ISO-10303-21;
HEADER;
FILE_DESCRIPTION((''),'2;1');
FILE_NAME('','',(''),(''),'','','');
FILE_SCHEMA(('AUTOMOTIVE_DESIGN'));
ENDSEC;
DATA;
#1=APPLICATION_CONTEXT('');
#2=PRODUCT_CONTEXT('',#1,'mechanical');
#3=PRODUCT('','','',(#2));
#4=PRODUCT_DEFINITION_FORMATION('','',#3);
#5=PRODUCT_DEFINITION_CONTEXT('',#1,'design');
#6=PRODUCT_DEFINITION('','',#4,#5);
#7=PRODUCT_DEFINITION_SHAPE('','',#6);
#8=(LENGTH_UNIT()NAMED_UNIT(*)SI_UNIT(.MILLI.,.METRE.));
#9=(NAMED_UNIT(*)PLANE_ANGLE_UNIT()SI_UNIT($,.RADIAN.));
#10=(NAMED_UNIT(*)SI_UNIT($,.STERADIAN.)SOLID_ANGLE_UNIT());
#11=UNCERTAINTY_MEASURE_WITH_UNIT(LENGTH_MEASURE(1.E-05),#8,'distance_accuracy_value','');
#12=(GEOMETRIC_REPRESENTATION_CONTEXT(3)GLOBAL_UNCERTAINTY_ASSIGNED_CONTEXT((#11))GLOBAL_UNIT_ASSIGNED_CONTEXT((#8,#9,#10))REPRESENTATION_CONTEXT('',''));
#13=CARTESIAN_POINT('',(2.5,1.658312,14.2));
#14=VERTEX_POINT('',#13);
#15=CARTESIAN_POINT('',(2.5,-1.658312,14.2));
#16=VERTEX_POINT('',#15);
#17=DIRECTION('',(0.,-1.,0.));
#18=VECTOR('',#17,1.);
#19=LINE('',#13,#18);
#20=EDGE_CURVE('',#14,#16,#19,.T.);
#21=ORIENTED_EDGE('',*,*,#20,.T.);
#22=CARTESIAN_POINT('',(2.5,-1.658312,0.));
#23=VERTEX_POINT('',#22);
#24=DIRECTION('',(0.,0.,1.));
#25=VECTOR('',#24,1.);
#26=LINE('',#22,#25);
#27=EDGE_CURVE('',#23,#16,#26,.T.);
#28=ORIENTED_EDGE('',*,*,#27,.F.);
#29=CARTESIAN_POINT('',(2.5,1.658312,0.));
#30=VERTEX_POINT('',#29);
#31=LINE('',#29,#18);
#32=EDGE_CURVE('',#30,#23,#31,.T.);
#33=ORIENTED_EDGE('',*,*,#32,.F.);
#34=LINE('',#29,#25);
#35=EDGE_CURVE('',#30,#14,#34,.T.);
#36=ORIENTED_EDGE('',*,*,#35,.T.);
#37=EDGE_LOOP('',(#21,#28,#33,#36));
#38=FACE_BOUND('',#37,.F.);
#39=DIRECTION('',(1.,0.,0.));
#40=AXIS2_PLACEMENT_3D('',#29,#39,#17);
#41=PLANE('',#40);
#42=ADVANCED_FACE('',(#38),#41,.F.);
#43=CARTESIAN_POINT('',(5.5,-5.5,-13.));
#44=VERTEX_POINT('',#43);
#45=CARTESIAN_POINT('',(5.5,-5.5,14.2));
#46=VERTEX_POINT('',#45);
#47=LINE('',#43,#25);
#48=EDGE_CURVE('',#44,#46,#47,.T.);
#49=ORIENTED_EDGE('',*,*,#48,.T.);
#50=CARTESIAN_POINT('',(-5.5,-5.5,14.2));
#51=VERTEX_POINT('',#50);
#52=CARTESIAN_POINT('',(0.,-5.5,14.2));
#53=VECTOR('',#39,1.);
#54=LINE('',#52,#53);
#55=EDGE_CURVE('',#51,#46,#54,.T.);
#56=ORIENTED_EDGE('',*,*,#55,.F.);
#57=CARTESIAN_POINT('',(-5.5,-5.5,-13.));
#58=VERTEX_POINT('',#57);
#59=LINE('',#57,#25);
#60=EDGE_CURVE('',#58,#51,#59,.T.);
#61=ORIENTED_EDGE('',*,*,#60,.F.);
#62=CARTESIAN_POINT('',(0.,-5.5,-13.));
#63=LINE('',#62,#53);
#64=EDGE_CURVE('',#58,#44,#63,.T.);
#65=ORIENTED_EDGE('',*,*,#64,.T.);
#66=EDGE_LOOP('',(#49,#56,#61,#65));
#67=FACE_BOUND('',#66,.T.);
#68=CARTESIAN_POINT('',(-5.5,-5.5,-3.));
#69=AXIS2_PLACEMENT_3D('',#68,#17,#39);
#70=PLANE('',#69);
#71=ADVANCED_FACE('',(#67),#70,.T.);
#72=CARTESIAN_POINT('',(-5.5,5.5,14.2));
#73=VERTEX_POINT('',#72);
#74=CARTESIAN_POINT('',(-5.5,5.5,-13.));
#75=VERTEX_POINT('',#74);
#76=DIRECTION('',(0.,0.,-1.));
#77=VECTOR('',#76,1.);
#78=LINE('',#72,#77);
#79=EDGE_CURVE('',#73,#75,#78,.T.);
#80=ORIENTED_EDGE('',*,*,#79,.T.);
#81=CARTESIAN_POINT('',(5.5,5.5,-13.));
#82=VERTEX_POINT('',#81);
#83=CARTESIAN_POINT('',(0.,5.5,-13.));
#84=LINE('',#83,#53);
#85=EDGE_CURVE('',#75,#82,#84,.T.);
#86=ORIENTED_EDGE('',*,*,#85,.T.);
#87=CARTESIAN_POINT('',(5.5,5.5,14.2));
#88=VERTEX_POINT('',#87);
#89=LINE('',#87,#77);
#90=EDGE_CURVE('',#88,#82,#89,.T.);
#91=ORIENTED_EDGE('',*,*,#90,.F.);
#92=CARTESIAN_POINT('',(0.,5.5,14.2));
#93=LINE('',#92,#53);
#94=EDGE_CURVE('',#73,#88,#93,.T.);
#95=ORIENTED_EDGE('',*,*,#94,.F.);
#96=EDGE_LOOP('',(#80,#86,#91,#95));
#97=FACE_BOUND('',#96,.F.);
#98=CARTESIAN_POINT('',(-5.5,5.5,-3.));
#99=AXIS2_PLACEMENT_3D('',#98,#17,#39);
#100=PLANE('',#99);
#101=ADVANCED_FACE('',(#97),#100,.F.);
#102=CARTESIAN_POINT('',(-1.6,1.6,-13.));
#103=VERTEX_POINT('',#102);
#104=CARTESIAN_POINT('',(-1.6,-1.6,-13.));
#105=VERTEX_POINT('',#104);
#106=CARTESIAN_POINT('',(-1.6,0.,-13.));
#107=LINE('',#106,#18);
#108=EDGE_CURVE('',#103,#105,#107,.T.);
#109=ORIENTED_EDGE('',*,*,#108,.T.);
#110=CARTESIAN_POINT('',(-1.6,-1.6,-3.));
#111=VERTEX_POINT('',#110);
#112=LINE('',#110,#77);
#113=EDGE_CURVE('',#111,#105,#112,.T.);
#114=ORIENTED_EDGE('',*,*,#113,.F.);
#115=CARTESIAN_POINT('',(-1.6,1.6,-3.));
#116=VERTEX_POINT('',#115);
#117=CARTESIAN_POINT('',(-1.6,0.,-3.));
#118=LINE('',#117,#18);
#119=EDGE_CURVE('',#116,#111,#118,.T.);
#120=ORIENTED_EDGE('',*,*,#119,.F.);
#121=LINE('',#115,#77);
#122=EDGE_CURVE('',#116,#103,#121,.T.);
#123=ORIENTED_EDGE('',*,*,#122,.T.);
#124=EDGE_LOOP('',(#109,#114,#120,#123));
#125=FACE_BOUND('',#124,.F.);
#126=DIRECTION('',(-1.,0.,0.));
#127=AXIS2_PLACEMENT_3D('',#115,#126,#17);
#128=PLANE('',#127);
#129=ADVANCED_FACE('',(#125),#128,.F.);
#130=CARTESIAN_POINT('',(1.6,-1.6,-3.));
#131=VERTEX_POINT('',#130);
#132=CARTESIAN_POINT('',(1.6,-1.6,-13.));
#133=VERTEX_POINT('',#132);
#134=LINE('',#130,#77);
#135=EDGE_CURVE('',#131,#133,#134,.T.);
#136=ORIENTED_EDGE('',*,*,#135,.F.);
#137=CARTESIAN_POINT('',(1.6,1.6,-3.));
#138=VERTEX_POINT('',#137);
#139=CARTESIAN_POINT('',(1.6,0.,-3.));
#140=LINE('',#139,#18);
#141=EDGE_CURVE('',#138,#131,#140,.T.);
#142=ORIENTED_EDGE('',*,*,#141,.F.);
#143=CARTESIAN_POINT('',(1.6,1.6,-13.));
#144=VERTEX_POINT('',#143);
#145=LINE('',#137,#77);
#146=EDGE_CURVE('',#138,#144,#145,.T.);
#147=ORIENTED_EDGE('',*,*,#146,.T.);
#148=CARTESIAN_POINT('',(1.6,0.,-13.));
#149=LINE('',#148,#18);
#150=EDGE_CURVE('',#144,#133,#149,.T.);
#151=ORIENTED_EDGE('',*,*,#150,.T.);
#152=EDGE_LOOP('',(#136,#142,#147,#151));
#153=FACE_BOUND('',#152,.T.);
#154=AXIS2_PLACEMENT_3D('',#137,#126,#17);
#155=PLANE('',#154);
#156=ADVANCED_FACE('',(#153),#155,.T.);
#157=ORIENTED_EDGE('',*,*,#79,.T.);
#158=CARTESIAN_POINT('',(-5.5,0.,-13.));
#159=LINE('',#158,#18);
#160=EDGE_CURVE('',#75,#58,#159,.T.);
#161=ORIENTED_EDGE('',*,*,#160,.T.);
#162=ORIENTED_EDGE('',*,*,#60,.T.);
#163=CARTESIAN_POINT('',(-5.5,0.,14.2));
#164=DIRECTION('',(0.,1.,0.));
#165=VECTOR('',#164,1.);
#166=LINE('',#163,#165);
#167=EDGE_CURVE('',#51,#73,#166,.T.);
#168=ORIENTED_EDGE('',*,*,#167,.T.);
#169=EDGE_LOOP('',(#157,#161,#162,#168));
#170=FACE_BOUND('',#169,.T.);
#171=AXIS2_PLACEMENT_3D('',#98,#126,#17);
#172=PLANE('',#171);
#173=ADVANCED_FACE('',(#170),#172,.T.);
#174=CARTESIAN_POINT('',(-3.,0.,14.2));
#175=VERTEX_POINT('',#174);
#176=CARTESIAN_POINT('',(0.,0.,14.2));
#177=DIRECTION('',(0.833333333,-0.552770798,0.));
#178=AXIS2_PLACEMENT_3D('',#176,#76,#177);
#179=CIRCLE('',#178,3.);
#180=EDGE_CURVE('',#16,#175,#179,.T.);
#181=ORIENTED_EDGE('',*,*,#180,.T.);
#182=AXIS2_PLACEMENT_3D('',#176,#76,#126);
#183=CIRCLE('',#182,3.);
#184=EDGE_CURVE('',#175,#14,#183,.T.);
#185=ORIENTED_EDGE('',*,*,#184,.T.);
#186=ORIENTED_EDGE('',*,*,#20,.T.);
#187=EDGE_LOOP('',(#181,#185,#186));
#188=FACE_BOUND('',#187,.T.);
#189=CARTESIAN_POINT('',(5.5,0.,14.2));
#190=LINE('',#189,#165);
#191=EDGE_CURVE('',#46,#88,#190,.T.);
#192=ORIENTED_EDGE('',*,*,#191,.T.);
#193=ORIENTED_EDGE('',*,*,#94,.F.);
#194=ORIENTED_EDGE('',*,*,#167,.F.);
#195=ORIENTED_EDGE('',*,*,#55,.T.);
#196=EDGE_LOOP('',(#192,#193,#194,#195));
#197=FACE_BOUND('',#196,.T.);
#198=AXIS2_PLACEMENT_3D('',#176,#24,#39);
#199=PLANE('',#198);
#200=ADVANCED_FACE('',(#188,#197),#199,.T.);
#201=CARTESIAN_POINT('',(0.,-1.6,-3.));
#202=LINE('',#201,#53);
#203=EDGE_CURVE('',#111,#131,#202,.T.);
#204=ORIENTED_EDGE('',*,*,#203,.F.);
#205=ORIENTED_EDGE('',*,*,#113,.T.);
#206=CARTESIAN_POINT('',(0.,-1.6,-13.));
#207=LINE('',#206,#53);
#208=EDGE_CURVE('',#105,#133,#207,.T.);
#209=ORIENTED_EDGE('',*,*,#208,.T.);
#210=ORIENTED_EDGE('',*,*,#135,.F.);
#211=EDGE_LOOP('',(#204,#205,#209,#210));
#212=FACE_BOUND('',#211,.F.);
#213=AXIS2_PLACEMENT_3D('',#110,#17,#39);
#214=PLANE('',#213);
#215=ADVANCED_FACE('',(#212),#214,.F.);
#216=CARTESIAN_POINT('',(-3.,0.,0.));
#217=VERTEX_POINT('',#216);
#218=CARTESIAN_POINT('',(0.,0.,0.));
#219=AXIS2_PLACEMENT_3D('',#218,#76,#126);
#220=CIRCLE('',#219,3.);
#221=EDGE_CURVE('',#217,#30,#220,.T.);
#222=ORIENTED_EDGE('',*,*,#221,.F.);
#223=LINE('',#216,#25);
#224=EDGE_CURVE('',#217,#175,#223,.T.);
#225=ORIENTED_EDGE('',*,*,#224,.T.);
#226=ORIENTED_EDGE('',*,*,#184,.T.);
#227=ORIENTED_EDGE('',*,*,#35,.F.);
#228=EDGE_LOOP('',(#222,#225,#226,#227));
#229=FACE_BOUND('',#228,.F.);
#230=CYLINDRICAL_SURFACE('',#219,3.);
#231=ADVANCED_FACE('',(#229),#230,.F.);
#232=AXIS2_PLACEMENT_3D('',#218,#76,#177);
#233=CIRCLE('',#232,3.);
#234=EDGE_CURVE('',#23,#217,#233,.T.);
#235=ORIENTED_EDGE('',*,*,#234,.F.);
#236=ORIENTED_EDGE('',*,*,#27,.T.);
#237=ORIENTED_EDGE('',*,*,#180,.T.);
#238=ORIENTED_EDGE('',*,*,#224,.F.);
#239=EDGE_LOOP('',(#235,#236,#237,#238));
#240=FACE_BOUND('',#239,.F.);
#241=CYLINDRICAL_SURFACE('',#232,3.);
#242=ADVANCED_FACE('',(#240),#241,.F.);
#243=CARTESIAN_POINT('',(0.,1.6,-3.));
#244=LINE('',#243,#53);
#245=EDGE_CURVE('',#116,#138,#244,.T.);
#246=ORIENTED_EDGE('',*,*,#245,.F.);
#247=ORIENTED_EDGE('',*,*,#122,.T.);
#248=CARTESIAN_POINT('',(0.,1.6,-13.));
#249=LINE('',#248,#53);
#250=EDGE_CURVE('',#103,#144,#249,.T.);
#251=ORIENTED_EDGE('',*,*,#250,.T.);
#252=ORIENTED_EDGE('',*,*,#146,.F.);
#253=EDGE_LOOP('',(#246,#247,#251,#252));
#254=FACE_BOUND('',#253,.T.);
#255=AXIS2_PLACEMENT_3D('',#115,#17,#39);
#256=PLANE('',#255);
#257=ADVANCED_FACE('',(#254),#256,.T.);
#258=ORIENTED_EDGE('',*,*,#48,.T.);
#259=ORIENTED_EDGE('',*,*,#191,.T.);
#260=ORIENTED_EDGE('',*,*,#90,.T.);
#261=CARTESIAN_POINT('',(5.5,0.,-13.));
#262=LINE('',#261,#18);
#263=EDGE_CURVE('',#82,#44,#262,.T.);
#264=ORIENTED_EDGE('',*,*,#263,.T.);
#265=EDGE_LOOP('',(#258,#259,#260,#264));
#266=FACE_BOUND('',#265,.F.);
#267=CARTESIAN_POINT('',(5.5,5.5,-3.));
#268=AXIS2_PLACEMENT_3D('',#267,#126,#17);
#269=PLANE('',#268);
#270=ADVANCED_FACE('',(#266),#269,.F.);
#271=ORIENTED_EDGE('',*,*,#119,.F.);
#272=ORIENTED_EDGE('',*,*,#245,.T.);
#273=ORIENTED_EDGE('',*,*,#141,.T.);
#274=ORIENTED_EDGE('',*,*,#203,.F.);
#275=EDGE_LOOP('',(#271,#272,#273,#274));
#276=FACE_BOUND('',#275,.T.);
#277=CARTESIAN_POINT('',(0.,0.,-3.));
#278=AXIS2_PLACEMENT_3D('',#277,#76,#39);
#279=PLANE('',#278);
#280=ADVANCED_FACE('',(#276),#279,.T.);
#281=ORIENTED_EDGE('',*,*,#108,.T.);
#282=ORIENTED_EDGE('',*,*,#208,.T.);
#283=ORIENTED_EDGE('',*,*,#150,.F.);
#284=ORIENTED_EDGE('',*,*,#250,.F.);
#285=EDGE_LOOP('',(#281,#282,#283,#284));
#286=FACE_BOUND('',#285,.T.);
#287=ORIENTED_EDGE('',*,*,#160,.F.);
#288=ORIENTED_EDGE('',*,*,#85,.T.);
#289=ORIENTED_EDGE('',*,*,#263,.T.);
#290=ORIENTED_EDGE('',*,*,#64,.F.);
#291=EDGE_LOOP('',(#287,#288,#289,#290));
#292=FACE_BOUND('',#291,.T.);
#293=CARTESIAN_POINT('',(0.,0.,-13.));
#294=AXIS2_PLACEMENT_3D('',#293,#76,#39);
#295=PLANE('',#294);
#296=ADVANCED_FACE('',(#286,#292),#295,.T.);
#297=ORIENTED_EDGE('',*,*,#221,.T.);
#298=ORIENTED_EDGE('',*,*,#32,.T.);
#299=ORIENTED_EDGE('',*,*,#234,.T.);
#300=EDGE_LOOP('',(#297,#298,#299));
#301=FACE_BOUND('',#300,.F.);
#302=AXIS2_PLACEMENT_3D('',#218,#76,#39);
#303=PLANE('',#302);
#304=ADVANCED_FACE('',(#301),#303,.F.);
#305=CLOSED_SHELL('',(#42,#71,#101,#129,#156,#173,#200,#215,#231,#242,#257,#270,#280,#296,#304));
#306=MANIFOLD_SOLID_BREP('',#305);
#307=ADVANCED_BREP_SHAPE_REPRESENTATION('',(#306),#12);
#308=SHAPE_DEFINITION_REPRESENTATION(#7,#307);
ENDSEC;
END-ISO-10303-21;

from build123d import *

# Parameters (mm, degrees)
F0_W     = 11
F0_H     = 11
F1_DEPTH = 14.2
F2_W     = 11
F2_H     = 11
F3_DEPTH = 3
F4_W     = 11
F4_H     = 11
F4_W_2   = 3.2
F4_H_2   = 3.2
F5_DEPTH = 10


# Not quite as in the source:
# - a feature names something its author has since deleted; it is built from what else it names


with BuildPart() as f1:
    # F0 (on Top) → F1 (new body)
    with BuildSketch(Plane.XY):
        Rectangle(F0_W, F0_H)
        with BuildLine():
            ThreePointArc((2.5, 1.6583123952), (2.8722813233, 0.8660254038), (3, 0))
            ThreePointArc((3, 0), (2.8722813233, -0.8660254038), (2.5, -1.6583123952))
            ThreePointArc((2.5, -1.6583123952), (-0.8660254038, -2.8722813233), (-3, 0))
            ThreePointArc((-3, 0), (-0.8660254038, 2.8722813233), (2.5, 1.6583123952))
        make_face(mode=Mode.SUBTRACT)
        with BuildLine():
            ThreePointArc((2.5, -1.6583123952), (2.8722813233, -0.8660254038), (3, 0))
            ThreePointArc((3, 0), (2.8722813233, 0.8660254038), (2.5, 1.6583123952))
            Line((2.5, 1.6583123952), (2.5, 0))
            Line((2.5, 0), (2.5, -1.6583123952))
        make_face()
    extrude(amount=F1_DEPTH)

    # F2 (on face) → F3 (join)
    with BuildSketch(Plane(origin=(0, 0, 0), x_dir=(1, 0, 0), z_dir=(0, 0, -1))):
        Rectangle(F2_W, F2_H)
        with BuildLine():
            ThreePointArc((2.5, -1.6583123952), (-3, 0), (2.5, 1.6583123952))
            Line((2.5, 1.6583123952), (2.5, -1.6583123952))
        make_face(mode=Mode.SUBTRACT)
        with BuildLine():
            Line((2.5, -1.6583123952), (2.5, 1.6583123952))
            ThreePointArc((2.5, 1.6583123952), (-3, 0), (2.5, -1.6583123952))
        make_face()
    extrude(amount=F3_DEPTH)

    # F4 (on face) → F5 (join)
    with BuildSketch(Plane(origin=(0, 0, -3), x_dir=(1, 0, 0), z_dir=(0, 0, -1))):
        Rectangle(F4_W, F4_H)
        Rectangle(F4_W_2, F4_H_2, mode=Mode.SUBTRACT)
    extrude(amount=F5_DEPTH)


solid = f1.part
